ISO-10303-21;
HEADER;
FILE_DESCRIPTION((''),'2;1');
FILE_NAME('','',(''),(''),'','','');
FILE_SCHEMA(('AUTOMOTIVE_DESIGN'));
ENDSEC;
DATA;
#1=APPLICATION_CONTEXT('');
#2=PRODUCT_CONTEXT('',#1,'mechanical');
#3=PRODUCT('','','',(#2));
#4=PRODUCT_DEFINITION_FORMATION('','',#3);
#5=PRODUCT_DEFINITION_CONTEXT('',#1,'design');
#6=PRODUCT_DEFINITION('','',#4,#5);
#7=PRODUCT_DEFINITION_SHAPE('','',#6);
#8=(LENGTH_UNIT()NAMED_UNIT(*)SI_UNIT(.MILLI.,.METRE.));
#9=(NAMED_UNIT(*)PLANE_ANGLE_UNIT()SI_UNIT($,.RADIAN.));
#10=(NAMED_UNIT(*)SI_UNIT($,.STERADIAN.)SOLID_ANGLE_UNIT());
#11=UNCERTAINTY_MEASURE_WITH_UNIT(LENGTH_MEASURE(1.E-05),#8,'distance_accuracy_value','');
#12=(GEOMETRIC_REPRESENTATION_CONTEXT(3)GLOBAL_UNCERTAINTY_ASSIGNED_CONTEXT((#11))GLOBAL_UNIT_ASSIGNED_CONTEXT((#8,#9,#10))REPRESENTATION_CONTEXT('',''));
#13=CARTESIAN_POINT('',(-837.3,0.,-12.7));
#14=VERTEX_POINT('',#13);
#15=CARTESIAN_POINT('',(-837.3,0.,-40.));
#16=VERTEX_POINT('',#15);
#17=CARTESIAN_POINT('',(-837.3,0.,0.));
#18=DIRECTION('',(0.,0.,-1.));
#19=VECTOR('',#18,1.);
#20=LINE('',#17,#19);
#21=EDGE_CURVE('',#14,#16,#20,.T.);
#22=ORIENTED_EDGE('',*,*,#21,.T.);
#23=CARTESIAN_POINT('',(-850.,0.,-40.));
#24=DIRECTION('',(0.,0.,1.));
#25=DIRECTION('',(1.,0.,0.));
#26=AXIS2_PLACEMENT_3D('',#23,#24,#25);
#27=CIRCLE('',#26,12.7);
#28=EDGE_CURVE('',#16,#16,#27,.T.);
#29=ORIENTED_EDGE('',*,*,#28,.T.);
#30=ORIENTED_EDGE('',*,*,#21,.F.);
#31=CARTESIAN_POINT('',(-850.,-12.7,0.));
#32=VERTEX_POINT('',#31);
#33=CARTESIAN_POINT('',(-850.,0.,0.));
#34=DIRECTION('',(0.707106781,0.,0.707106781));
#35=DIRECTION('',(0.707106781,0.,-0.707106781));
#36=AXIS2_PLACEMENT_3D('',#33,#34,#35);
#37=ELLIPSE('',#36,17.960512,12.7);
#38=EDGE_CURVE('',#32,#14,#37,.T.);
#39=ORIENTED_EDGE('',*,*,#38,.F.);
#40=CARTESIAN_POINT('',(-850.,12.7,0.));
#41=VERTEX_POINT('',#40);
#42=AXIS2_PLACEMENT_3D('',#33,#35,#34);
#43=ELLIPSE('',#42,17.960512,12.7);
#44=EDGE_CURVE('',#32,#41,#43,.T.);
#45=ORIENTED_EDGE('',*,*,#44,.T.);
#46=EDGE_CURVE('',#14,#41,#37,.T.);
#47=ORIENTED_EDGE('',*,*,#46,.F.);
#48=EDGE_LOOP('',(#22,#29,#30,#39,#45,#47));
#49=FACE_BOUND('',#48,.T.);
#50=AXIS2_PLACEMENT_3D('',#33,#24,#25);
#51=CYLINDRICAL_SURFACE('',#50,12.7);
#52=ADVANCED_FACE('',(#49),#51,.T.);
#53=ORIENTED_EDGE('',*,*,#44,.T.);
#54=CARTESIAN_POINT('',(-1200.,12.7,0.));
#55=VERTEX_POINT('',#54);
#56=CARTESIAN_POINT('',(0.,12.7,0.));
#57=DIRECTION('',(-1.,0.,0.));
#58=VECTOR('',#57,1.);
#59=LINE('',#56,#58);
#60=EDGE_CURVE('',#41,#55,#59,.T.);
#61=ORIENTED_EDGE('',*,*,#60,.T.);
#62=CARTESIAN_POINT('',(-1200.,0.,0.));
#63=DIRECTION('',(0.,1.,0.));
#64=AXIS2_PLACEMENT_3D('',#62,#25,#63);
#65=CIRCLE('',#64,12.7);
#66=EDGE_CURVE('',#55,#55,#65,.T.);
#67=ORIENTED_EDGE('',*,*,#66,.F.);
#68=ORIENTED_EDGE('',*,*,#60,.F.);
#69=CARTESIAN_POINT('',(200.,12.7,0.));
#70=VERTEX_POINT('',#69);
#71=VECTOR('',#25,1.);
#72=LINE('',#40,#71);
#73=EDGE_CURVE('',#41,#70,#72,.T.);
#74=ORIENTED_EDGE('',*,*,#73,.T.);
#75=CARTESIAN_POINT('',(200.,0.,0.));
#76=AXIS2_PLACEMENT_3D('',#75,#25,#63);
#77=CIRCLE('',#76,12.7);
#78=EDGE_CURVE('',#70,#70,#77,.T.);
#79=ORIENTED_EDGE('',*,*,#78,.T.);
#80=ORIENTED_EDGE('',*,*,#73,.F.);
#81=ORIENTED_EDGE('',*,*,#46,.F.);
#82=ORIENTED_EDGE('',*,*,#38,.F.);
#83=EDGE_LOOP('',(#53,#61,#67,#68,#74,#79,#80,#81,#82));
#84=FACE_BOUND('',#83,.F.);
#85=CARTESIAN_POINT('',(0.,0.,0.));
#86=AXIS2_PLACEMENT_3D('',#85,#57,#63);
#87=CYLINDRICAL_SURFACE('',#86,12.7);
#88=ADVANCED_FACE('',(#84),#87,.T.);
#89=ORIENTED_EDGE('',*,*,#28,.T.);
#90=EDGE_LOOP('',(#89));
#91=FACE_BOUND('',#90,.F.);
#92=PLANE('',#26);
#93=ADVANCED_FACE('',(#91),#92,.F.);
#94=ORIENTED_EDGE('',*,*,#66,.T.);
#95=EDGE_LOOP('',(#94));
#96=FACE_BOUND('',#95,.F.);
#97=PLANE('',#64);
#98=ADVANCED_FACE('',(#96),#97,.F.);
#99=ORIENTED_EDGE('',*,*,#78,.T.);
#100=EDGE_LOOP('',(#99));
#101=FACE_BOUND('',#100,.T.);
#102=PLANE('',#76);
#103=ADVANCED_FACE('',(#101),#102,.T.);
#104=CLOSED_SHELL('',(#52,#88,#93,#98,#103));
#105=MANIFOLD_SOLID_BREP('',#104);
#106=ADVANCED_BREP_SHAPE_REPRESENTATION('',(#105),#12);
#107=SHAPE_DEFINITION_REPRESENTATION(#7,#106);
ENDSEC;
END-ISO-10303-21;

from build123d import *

# Parameters (mm, degrees)
F0_R     = 12.7
F1_DEPTH = 1200
F2_R     = 12.7
F3_DEPTH = 40
F4_DEPTH = 200


with BuildPart() as f1:
    # F0 (on Right) → F1 (new body)
    with BuildSketch(Plane.YZ):
        Circle(F0_R)
    extrude(amount=-F1_DEPTH)

    # F2 (on Top) → F3 (join)
    with BuildSketch(Plane.XY):
        with Locations((-850, 0)):
            Circle(F2_R)
    extrude(amount=-F3_DEPTH)

    # F4 (add): a face of the model
    f4_faces = [f1.faces().sort_by_distance(p)[0] for p in [
        (0, 0, 0),
    ]]
    extrude(f4_faces, amount=F4_DEPTH)


solid = f1.part
